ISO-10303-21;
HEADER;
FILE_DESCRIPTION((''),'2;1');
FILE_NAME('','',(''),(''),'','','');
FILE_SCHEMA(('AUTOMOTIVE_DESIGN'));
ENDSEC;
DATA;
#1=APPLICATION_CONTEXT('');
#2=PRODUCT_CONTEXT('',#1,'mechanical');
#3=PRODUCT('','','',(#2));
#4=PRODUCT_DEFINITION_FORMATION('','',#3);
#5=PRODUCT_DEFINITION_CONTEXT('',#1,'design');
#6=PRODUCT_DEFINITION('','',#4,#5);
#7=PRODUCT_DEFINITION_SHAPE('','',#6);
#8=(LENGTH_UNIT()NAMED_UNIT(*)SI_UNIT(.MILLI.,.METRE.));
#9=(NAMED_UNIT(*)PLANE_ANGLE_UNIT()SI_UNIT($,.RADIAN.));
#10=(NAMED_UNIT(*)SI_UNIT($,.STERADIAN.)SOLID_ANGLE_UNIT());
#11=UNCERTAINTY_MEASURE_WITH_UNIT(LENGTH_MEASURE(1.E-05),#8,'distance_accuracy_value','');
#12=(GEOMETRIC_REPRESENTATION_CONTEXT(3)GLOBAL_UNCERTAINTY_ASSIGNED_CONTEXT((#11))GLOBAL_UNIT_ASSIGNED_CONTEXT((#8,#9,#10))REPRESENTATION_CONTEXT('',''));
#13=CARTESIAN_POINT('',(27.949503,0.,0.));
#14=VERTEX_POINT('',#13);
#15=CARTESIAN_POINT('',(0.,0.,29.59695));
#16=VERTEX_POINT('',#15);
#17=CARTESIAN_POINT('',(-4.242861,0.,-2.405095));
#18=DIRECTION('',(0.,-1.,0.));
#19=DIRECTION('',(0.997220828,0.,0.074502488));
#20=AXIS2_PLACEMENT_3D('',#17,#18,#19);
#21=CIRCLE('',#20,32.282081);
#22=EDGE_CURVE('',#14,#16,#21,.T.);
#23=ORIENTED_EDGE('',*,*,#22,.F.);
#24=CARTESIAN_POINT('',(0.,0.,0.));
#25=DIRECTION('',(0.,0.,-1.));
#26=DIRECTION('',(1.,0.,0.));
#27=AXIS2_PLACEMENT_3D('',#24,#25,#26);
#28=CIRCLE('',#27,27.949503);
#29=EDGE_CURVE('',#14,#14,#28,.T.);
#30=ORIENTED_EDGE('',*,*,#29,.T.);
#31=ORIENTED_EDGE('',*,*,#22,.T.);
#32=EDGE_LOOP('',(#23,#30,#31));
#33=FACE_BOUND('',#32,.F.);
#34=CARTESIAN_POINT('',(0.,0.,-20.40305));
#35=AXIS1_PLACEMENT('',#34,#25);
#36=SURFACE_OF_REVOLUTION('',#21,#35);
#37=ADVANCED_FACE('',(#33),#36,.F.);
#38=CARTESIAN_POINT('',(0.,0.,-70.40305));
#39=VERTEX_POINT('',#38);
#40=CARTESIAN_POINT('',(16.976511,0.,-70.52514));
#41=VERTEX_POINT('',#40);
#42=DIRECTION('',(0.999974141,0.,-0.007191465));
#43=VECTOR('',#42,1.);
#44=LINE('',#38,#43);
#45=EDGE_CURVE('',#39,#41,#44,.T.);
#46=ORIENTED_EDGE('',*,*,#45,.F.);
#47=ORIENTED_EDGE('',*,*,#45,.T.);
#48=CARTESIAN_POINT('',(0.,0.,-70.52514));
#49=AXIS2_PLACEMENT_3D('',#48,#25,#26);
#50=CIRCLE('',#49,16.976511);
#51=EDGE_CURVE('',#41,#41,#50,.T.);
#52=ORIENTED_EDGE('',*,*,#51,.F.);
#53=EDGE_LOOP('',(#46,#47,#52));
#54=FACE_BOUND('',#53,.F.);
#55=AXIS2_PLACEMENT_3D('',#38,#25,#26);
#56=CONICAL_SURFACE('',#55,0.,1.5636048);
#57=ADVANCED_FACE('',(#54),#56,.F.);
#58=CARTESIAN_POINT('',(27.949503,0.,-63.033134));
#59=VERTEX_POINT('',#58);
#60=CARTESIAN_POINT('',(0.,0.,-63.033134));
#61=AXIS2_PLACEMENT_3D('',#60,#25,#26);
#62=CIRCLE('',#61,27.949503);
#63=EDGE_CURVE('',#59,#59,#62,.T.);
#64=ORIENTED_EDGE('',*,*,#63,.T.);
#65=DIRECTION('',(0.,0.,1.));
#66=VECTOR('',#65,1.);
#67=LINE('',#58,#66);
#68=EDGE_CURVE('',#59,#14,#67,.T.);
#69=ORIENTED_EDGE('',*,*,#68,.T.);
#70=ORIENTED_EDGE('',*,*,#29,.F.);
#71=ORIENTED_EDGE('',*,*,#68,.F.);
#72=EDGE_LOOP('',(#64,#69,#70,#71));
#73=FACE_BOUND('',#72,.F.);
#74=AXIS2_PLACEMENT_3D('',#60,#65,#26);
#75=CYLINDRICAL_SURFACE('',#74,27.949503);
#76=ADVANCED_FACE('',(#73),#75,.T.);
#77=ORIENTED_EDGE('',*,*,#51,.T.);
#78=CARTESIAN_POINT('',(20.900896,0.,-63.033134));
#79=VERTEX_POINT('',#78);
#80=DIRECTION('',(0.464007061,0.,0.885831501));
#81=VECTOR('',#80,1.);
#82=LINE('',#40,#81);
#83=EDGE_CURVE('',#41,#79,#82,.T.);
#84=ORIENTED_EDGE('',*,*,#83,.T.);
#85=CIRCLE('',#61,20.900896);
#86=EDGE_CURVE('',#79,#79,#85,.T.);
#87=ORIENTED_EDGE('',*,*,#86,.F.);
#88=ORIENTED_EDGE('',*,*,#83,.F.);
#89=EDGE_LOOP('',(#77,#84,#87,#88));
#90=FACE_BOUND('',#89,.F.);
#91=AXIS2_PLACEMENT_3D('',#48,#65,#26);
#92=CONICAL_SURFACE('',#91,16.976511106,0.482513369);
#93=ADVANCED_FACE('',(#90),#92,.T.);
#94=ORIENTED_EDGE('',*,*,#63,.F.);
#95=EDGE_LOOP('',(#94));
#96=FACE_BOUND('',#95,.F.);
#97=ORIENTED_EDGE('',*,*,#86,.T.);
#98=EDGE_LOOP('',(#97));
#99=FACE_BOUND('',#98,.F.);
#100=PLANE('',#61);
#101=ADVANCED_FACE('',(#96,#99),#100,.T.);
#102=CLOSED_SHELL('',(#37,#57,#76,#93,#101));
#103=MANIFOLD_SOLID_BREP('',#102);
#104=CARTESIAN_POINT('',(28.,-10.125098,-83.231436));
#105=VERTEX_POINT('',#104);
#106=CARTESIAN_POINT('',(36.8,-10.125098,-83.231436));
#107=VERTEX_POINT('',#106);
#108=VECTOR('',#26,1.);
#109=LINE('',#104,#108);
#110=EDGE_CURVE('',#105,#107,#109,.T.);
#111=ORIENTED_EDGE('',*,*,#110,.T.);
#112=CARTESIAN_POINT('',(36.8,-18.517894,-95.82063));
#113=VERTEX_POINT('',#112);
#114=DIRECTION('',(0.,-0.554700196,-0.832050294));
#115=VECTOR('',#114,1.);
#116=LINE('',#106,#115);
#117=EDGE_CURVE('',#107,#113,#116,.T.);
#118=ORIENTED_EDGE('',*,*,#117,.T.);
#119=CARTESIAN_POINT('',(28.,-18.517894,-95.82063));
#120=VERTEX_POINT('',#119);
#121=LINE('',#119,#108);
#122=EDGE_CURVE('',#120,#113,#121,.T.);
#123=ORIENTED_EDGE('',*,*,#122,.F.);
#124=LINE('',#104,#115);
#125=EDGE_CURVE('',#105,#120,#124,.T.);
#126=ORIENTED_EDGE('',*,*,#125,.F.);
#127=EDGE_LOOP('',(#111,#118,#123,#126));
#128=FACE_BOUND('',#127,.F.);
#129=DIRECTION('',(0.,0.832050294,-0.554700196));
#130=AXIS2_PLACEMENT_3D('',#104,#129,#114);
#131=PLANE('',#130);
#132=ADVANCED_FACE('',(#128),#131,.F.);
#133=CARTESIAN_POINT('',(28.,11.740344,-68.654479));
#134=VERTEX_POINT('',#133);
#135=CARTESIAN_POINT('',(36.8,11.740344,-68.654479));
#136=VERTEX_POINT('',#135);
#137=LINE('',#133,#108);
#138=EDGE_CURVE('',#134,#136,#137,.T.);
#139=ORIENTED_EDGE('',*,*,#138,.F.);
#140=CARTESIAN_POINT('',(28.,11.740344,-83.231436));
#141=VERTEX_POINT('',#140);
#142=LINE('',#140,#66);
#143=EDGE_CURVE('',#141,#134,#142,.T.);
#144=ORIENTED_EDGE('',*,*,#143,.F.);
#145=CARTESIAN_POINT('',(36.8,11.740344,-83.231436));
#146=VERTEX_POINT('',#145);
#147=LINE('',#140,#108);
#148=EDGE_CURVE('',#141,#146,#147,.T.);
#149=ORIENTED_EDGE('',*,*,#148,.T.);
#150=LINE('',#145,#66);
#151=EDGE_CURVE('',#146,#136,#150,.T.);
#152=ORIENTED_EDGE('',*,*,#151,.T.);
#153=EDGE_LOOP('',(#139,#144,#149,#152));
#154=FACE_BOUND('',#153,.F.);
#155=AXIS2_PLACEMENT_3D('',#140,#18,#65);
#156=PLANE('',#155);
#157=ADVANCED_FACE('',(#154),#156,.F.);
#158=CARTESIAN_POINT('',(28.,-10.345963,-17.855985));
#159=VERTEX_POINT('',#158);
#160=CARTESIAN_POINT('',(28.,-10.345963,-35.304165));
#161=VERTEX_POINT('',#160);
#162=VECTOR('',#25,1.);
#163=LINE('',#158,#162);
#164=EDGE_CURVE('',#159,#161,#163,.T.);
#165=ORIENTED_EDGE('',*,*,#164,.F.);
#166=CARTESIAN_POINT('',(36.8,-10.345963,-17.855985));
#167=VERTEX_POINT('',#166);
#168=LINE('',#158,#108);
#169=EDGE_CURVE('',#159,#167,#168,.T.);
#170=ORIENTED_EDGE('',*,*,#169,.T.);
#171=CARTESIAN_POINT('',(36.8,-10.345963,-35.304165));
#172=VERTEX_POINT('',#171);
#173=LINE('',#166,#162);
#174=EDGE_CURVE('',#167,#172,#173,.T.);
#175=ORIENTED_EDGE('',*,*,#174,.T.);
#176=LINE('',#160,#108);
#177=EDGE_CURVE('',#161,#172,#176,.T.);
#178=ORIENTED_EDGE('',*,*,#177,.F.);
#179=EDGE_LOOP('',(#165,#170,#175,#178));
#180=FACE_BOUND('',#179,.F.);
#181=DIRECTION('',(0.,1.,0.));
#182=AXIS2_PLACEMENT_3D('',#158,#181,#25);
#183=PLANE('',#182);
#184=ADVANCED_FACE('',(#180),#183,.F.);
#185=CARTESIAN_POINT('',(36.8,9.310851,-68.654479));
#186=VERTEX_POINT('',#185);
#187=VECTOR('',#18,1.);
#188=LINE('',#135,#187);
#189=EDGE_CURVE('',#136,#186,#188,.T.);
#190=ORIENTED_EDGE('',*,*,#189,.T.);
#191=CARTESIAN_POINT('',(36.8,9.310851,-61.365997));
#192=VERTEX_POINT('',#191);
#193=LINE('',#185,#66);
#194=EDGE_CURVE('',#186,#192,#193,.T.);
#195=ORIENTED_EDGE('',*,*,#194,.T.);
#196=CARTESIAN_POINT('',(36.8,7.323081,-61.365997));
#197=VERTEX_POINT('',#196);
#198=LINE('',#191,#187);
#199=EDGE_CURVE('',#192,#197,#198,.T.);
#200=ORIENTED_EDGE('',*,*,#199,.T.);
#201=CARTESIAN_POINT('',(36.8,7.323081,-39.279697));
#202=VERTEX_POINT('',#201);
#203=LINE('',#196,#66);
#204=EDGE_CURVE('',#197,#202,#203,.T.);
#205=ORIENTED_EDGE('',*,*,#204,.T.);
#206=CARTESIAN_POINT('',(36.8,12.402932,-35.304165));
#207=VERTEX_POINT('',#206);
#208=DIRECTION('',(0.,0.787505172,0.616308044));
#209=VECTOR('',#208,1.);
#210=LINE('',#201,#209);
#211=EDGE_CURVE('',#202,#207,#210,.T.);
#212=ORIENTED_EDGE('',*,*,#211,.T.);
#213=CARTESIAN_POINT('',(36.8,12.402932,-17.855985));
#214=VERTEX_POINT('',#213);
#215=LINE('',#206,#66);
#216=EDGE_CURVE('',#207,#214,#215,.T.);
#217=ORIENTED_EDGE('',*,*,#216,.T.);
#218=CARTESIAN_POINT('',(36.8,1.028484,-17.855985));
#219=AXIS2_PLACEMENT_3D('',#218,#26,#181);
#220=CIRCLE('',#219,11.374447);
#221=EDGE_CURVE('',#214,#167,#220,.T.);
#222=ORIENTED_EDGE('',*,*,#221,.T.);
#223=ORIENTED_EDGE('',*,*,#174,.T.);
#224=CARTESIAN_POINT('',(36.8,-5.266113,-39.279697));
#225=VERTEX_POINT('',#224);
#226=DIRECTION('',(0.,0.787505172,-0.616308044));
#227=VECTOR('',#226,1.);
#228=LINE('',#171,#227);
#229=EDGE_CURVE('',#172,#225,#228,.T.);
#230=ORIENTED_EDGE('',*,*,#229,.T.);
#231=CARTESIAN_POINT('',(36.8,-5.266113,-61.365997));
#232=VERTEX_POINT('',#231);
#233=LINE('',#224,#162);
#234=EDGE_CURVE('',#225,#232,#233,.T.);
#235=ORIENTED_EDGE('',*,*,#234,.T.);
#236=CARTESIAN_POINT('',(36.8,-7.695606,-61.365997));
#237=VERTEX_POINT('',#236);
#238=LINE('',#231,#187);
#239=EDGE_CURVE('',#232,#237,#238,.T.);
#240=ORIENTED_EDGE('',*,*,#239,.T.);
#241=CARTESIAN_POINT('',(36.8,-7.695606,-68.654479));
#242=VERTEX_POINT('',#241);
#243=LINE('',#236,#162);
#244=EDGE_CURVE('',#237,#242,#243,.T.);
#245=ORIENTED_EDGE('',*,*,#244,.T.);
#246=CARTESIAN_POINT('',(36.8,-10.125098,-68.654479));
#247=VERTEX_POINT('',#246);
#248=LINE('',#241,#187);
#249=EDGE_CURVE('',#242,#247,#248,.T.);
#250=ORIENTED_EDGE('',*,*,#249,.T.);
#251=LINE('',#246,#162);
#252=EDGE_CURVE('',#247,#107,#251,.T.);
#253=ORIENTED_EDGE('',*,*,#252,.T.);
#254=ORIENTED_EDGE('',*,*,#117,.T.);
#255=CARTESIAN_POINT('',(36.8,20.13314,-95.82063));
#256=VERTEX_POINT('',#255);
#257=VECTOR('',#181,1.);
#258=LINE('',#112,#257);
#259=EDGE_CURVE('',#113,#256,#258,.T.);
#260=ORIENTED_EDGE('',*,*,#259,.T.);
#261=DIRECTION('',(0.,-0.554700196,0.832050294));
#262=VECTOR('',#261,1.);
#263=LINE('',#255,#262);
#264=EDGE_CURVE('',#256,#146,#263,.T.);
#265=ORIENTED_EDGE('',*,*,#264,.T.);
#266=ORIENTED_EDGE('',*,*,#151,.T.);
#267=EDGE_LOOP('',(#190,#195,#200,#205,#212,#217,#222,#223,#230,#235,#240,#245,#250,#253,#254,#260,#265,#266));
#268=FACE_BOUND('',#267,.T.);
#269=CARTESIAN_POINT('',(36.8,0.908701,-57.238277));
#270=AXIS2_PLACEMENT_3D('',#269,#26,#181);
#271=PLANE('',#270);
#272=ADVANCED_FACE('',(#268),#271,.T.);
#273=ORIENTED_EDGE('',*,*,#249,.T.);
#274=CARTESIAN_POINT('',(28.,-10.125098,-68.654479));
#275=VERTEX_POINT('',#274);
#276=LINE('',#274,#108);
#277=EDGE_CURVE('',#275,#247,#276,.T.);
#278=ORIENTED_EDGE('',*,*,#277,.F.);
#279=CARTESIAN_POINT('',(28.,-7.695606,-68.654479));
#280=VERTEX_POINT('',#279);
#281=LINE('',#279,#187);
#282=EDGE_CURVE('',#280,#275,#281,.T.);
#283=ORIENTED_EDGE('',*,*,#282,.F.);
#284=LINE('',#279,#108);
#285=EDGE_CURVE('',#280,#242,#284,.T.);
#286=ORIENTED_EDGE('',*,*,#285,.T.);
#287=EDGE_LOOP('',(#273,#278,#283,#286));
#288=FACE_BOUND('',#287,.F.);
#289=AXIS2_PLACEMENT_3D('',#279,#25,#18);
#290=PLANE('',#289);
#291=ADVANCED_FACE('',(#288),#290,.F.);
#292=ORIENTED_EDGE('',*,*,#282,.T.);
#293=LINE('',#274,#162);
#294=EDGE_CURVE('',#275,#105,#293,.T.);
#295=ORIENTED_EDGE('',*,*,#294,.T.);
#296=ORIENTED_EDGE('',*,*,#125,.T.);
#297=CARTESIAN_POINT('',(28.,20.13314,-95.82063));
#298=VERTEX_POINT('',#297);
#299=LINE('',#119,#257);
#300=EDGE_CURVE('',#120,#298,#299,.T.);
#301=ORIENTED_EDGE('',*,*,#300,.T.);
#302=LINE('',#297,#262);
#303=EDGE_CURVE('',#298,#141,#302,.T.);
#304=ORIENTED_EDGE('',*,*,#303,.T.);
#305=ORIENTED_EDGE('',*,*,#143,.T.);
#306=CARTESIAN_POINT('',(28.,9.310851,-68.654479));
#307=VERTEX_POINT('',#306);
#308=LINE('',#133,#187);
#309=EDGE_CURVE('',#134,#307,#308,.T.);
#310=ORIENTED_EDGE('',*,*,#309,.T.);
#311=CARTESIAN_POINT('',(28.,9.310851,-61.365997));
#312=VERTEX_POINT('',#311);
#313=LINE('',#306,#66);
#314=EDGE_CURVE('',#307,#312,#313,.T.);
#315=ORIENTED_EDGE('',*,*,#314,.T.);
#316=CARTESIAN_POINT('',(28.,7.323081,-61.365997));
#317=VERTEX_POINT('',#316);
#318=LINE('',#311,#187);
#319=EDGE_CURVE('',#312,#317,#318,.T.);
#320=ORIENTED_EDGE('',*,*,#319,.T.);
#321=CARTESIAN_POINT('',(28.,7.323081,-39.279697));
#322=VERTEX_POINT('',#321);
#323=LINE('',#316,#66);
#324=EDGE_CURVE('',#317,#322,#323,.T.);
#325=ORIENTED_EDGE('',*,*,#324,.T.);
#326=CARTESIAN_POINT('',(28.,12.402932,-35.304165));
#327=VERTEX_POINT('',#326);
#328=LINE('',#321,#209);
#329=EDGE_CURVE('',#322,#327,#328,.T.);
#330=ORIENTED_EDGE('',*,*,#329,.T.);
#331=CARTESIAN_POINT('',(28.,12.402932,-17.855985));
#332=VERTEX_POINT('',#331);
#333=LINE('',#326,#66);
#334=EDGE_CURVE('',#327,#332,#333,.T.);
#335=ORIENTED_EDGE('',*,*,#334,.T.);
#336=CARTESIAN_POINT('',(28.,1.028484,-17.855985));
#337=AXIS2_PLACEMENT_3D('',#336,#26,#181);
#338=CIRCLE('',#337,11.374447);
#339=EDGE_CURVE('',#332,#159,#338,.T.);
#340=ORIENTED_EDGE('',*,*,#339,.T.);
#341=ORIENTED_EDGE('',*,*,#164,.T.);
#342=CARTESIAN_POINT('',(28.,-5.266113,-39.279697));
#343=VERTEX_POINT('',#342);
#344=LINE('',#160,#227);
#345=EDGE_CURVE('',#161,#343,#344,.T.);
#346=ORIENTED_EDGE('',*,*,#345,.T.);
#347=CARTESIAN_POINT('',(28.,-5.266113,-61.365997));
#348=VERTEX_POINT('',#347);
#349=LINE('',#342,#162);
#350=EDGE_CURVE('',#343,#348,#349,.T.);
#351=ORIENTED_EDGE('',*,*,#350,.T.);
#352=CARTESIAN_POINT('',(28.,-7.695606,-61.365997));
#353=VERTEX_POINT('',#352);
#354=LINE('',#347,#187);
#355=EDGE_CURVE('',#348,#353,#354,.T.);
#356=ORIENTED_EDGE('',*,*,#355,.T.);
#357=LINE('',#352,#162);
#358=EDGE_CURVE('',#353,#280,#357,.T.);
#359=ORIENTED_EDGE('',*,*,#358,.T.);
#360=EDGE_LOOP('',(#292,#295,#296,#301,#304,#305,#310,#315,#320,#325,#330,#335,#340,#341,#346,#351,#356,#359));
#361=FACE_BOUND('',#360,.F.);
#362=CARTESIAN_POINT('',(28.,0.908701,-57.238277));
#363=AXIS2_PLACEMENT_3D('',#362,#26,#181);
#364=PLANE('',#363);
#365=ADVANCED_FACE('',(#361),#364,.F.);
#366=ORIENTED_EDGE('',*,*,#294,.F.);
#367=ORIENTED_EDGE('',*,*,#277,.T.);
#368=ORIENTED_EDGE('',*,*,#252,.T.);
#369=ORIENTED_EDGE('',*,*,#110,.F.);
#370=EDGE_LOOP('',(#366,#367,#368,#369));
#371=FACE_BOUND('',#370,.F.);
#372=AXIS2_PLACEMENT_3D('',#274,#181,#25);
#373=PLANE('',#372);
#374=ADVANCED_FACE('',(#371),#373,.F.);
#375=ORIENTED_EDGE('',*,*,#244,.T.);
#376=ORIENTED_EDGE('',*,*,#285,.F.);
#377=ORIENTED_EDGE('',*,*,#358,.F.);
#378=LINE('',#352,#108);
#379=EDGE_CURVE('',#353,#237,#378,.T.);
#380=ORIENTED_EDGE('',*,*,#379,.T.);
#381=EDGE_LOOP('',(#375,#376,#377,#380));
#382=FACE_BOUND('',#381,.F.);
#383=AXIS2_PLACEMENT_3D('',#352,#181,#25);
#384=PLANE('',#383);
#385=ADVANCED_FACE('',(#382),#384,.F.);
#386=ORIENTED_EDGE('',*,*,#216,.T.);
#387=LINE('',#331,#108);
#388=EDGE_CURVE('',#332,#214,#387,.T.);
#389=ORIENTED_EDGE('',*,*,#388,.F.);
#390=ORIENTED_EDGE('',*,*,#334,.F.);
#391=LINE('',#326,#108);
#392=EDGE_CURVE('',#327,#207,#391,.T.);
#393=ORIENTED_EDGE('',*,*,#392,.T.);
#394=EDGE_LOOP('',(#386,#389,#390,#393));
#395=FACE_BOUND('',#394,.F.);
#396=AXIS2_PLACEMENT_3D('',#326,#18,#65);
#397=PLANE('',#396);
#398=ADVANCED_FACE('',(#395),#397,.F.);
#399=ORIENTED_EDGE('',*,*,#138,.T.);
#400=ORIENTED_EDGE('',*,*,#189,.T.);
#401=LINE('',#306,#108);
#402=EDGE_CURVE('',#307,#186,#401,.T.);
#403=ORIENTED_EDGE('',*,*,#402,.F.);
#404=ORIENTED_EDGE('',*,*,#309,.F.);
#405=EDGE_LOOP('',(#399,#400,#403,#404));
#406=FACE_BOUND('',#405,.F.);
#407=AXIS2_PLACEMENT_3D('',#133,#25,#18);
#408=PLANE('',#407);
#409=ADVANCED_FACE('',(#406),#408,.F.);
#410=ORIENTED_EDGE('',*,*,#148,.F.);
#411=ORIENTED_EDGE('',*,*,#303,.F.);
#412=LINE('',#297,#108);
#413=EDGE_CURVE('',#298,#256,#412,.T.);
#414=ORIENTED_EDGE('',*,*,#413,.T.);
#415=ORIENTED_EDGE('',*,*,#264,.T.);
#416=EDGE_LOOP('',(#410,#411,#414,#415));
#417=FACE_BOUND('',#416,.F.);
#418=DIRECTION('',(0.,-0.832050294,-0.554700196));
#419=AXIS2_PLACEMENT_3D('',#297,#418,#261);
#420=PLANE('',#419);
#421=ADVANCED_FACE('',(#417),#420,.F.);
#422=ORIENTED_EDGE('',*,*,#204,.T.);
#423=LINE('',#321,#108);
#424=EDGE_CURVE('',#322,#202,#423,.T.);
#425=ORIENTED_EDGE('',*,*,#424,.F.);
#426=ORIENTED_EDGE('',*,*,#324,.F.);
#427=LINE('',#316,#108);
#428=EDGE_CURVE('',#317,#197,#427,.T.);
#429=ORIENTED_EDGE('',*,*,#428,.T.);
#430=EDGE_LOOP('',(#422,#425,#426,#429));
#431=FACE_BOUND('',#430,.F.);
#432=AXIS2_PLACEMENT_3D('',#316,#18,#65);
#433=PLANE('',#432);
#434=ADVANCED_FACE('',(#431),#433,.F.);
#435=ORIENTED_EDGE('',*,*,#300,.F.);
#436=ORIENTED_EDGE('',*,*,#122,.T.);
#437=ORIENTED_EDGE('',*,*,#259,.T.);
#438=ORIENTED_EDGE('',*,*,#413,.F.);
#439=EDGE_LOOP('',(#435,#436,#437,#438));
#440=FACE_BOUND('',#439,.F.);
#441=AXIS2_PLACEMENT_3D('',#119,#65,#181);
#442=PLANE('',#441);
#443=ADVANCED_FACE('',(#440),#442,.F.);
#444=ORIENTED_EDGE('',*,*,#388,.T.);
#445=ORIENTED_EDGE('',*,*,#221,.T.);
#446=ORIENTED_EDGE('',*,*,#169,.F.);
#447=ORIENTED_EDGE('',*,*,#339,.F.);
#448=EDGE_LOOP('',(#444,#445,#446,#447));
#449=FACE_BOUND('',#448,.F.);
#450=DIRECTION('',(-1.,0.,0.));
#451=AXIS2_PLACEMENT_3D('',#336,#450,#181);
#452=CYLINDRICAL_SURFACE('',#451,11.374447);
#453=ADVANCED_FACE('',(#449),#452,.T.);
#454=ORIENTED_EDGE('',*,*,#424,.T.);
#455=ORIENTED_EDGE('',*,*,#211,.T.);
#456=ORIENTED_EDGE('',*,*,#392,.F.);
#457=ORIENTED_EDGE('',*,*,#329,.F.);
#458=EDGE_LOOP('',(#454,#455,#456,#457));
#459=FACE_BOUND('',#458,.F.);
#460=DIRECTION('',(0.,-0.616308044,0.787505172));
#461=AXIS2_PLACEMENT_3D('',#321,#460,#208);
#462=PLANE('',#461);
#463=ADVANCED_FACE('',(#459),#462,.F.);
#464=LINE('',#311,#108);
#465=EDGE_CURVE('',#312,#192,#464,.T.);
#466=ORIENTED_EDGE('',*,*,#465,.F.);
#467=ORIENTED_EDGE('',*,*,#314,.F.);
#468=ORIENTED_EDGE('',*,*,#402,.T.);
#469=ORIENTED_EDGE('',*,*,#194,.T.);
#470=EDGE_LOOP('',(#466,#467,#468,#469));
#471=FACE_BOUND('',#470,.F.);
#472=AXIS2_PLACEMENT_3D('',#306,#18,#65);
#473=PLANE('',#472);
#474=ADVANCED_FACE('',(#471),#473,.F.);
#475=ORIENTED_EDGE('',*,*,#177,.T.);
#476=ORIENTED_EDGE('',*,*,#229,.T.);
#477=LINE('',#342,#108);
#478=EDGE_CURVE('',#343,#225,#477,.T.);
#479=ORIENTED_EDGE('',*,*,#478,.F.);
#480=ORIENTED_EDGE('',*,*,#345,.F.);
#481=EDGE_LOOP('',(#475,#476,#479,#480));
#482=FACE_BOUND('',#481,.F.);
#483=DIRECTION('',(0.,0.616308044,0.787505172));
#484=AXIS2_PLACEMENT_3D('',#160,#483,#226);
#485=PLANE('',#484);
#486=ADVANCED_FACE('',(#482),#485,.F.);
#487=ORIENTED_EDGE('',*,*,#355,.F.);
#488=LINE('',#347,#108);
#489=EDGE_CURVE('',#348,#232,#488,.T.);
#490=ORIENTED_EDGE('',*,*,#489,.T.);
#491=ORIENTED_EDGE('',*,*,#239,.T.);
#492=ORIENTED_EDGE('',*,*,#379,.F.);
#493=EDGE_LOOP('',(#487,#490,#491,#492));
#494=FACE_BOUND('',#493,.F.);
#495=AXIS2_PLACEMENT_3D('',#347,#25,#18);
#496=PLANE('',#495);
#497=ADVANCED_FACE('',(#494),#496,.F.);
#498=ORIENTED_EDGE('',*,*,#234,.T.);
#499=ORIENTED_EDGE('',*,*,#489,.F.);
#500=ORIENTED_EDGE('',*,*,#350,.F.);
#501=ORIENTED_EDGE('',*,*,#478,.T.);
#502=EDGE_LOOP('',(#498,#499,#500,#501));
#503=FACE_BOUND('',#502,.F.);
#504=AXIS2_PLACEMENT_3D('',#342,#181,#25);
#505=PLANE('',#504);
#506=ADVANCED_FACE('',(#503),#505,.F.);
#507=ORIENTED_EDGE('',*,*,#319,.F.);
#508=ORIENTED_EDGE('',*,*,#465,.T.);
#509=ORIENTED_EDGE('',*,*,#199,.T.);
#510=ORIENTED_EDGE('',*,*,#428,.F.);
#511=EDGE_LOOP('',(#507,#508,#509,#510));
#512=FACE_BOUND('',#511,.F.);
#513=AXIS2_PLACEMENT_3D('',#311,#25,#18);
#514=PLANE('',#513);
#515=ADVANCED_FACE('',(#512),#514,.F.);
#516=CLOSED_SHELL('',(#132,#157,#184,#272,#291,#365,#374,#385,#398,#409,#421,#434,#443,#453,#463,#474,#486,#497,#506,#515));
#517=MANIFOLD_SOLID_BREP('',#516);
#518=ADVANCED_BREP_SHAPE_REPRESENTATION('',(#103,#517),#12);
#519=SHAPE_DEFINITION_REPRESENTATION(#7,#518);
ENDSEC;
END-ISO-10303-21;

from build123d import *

# Parameters (mm, degrees)
F4_DEPTH = 8.8


with BuildPart() as f1:
    # F0 (on Front) → F1 (revolve)
    with BuildSketch(Plane.XZ):
        with BuildLine():
            ThreePointArc((27.9495026916, 0), (19.2278922615, 19.7592115619), (0, 29.5969495755))
            Line((0, 29.5969495755), (0, -70.4030504245))
            Line((0, -70.4030504245), (16.9765111059, -70.5251395702))
            Line((16.9765111059, -70.5251395702), (20.9008958191, -63.0331337452))
            Line((20.9008958191, -63.0331337452), (27.9495026916, -63.0331337452))
            Line((27.9495026916, -63.0331337452), (27.9495026916, 0))
        make_face()
    revolve(axis=Axis((0, 0, -20.4030504245), (0, 0, -1)))


with BuildPart() as f4:
    # F3 (on offset) → F4 (new body)
    with BuildSketch(Plane.YZ.offset(28)):
        with BuildLine():
            Line((-10.345963412, -17.8559850901), (-10.345963412, -35.3041645139))
            Line((-10.345963412, -35.3041645139), (-5.2661128575, -39.2796974629))
            Line((-5.2661128575, -39.2796974629), (-5.2661128575, -61.3659974188))
            Line((-5.2661128575, -61.3659974188), (-7.6956056291, -61.3659974188))
            Line((-7.6956056291, -61.3659974188), (-7.6956056291, -68.6544794589))
            Line((-7.6956056291, -68.6544794589), (-10.1250984007, -68.6544794589))
            Line((-10.1250984007, -68.6544794589), (-10.1250984007, -83.2314360887))
            Line((-10.1250984007, -83.2314360887), (-18.5178943211, -95.8206299692))
            Line((-18.5178943211, -95.8206299692), (20.1331399148, -95.8206299692))
            Line((20.1331399148, -95.8206299692), (11.7403439945, -83.2314360887))
            Line((11.7403439945, -83.2314360887), (11.7403439945, -68.6544794589))
            Line((11.7403439945, -68.6544794589), (9.3108512228, -68.6544794589))
            Line((9.3108512228, -68.6544794589), (9.3108512228, -61.3659974188))
            Line((9.3108512228, -61.3659974188), (7.3230810231, -61.3659974188))
            Line((7.3230810231, -61.3659974188), (7.3230810231, -39.2796974629))
            Line((7.3230810231, -39.2796974629), (12.4029315775, -35.3041645139))
            Line((12.4029315775, -35.3041645139), (12.4029315775, -17.8559850901))
            ThreePointArc((12.4029315775, -17.8559850901), (1.0284840828, -6.4815375954), (-10.345963412, -17.8559850901))
        make_face()
    extrude(amount=F4_DEPTH)


solid = Compound([f1.part, f4.part])
